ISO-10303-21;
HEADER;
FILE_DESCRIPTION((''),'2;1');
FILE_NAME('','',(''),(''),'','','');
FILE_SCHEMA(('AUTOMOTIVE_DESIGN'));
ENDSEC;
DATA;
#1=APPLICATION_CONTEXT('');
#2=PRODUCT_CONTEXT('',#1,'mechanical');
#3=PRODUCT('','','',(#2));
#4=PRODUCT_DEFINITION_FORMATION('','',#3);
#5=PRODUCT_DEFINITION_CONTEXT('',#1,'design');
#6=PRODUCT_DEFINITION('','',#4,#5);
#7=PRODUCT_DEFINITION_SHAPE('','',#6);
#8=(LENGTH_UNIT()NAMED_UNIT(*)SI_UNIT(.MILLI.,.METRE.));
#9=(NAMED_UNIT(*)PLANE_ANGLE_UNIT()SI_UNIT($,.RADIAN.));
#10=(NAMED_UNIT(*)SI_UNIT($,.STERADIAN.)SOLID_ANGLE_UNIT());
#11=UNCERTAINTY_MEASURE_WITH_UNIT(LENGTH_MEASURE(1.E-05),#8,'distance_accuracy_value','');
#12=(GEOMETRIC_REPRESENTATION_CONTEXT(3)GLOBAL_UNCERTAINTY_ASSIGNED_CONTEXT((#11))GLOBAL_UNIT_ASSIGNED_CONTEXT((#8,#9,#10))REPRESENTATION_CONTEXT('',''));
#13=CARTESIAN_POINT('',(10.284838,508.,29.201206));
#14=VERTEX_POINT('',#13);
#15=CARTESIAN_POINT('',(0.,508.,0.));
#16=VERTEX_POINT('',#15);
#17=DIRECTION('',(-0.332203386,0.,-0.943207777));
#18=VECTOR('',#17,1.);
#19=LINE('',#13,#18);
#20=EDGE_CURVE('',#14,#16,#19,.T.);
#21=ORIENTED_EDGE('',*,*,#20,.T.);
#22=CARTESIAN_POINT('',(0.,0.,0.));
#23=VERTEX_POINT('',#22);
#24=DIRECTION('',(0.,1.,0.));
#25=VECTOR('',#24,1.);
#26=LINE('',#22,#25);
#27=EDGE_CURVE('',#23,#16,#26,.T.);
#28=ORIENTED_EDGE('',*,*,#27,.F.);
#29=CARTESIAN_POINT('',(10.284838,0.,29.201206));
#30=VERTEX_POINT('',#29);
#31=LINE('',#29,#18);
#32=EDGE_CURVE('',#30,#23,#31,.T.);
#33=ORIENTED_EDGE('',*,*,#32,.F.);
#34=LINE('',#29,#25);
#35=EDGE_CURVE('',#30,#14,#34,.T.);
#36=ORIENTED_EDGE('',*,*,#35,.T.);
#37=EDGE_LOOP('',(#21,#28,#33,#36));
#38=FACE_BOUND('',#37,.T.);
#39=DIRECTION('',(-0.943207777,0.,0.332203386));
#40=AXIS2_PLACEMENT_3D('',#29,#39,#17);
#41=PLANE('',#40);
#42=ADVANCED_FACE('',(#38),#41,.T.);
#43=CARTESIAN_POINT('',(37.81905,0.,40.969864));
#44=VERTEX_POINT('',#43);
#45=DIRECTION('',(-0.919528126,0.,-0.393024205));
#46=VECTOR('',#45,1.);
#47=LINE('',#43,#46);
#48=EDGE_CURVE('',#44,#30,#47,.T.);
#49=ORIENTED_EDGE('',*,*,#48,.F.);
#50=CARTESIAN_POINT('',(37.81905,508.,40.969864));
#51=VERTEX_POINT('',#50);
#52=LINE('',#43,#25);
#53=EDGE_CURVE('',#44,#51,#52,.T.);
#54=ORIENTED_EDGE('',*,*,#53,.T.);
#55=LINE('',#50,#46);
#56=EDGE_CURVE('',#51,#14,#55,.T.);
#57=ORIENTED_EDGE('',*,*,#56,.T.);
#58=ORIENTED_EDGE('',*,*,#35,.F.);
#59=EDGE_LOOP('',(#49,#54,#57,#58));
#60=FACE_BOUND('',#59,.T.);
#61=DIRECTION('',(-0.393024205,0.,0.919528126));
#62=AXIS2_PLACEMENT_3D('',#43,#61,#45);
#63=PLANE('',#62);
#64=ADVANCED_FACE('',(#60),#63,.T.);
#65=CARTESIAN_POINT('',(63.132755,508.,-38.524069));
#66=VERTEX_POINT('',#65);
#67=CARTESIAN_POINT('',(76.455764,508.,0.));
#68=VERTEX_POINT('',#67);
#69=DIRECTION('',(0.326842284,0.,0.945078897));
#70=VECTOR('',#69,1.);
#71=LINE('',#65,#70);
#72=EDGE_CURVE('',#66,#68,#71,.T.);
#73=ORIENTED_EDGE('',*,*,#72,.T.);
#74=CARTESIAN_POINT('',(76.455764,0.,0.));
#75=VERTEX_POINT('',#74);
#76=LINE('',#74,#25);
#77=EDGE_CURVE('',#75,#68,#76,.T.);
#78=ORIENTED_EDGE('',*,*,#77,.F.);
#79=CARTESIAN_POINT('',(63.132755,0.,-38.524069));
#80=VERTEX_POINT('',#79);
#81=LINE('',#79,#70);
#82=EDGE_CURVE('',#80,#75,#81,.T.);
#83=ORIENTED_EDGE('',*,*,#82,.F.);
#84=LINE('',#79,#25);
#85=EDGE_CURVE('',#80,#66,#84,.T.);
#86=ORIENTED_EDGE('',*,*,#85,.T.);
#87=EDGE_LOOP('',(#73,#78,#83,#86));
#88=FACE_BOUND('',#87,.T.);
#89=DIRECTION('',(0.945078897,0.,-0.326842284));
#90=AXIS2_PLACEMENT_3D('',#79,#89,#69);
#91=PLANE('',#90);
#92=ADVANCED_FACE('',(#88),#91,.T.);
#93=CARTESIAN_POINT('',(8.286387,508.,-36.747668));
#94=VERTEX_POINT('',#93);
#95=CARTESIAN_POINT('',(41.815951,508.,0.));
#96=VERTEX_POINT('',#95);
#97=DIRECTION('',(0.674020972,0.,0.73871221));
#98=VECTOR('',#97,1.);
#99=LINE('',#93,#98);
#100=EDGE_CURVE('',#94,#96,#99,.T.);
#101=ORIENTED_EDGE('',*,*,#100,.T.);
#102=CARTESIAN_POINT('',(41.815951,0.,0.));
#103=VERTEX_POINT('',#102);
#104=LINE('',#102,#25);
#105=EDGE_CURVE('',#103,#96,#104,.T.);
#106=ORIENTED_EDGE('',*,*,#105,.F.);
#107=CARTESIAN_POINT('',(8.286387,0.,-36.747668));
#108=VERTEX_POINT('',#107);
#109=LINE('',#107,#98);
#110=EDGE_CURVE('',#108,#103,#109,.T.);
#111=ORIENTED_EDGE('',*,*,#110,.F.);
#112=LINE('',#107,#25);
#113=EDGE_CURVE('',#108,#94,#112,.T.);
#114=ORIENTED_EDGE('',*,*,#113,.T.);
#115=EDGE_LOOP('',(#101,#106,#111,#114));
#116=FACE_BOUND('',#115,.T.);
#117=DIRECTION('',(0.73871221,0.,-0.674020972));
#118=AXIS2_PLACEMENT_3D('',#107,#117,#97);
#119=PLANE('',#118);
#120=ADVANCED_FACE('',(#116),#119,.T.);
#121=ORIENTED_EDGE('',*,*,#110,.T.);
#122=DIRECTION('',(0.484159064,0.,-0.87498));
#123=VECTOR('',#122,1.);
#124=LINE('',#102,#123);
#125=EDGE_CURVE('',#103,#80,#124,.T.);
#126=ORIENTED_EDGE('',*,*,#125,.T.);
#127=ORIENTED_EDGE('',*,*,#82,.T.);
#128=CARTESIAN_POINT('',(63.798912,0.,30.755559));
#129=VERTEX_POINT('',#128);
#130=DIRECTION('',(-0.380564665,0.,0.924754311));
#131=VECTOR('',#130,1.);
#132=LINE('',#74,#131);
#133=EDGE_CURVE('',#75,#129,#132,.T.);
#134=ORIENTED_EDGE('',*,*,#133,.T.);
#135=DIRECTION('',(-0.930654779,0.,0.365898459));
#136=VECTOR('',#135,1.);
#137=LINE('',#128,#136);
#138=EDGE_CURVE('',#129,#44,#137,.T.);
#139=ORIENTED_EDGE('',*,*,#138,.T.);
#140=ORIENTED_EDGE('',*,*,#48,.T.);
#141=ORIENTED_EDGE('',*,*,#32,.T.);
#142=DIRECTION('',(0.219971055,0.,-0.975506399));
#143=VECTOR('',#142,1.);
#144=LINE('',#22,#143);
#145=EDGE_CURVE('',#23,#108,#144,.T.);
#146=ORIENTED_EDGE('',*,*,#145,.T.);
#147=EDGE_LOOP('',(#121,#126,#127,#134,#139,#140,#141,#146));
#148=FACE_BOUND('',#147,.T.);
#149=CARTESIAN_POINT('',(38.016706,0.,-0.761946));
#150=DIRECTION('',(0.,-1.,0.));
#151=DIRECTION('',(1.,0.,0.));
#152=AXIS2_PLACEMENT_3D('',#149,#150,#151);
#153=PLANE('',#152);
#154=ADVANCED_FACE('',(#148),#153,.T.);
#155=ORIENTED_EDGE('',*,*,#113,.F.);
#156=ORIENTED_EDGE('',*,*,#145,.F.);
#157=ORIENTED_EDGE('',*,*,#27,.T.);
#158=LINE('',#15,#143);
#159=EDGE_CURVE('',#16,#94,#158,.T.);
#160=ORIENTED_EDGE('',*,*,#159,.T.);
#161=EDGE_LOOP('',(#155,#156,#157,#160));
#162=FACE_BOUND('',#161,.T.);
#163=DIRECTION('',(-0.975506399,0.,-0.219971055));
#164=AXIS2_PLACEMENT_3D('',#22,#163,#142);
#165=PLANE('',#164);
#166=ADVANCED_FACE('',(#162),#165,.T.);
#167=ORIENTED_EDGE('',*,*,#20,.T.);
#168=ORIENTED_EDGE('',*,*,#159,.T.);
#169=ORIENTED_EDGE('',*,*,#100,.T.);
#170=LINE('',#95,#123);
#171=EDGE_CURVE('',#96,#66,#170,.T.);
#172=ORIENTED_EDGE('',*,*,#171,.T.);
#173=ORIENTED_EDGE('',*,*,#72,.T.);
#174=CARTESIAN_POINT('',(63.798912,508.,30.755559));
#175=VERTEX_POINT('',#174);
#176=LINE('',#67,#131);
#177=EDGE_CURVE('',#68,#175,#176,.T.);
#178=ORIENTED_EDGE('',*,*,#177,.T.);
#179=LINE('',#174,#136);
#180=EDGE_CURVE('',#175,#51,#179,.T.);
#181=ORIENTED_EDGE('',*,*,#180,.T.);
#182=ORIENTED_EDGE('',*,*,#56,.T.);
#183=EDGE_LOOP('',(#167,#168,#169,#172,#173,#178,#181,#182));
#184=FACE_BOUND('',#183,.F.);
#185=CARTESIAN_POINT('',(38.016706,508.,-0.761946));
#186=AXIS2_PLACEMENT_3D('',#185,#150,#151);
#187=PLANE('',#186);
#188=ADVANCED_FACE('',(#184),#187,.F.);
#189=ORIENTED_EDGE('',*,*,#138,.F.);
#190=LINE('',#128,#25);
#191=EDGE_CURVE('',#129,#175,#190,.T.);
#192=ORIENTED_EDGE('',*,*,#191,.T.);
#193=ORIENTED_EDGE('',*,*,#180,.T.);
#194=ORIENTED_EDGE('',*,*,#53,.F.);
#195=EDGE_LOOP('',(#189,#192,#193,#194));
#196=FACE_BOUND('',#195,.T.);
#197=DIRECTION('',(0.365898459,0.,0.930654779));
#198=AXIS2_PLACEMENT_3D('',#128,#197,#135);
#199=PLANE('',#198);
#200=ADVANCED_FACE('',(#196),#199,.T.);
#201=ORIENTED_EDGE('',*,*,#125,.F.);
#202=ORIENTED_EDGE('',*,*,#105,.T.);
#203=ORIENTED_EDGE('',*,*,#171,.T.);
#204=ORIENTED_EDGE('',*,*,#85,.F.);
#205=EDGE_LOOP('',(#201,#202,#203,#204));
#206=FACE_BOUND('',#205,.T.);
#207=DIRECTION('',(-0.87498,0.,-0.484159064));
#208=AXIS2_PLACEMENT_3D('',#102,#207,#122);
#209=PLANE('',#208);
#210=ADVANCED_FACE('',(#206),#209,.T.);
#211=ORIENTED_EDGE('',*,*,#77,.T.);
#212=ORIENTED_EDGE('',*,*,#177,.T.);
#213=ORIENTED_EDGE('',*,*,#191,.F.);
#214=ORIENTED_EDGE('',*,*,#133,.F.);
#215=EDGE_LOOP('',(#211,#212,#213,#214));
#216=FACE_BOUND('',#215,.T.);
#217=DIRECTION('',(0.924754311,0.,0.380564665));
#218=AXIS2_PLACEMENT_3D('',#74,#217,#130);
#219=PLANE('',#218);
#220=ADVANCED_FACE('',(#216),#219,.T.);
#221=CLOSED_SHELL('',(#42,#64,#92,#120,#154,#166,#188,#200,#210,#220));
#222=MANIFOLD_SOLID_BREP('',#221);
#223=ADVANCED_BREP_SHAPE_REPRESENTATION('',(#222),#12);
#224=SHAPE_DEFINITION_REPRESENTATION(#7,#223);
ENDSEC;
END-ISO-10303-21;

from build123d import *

# Parameters (mm, degrees)
F5_DEPTH = 508


# Not quite as in the source:
# - the program builds the solid bodies; features that only make, move or delete a surface that nothing else refers to are left out


with BuildPart() as f5:
    # F4 (on Front) → F5 (new body)
    with BuildSketch(Plane.XZ):
        Polygon((10.2848382667, 29.2012058198), (0, 0), (8.2863867283, -36.7476679385), (41.8159514666, 0), (63.1327554584, -38.524068892), (76.4557644725, 0), (63.7989118695, 30.7555589825), (37.8190502524, 40.969863534), align=None)
    extrude(amount=-F5_DEPTH)


solid = f5.part
